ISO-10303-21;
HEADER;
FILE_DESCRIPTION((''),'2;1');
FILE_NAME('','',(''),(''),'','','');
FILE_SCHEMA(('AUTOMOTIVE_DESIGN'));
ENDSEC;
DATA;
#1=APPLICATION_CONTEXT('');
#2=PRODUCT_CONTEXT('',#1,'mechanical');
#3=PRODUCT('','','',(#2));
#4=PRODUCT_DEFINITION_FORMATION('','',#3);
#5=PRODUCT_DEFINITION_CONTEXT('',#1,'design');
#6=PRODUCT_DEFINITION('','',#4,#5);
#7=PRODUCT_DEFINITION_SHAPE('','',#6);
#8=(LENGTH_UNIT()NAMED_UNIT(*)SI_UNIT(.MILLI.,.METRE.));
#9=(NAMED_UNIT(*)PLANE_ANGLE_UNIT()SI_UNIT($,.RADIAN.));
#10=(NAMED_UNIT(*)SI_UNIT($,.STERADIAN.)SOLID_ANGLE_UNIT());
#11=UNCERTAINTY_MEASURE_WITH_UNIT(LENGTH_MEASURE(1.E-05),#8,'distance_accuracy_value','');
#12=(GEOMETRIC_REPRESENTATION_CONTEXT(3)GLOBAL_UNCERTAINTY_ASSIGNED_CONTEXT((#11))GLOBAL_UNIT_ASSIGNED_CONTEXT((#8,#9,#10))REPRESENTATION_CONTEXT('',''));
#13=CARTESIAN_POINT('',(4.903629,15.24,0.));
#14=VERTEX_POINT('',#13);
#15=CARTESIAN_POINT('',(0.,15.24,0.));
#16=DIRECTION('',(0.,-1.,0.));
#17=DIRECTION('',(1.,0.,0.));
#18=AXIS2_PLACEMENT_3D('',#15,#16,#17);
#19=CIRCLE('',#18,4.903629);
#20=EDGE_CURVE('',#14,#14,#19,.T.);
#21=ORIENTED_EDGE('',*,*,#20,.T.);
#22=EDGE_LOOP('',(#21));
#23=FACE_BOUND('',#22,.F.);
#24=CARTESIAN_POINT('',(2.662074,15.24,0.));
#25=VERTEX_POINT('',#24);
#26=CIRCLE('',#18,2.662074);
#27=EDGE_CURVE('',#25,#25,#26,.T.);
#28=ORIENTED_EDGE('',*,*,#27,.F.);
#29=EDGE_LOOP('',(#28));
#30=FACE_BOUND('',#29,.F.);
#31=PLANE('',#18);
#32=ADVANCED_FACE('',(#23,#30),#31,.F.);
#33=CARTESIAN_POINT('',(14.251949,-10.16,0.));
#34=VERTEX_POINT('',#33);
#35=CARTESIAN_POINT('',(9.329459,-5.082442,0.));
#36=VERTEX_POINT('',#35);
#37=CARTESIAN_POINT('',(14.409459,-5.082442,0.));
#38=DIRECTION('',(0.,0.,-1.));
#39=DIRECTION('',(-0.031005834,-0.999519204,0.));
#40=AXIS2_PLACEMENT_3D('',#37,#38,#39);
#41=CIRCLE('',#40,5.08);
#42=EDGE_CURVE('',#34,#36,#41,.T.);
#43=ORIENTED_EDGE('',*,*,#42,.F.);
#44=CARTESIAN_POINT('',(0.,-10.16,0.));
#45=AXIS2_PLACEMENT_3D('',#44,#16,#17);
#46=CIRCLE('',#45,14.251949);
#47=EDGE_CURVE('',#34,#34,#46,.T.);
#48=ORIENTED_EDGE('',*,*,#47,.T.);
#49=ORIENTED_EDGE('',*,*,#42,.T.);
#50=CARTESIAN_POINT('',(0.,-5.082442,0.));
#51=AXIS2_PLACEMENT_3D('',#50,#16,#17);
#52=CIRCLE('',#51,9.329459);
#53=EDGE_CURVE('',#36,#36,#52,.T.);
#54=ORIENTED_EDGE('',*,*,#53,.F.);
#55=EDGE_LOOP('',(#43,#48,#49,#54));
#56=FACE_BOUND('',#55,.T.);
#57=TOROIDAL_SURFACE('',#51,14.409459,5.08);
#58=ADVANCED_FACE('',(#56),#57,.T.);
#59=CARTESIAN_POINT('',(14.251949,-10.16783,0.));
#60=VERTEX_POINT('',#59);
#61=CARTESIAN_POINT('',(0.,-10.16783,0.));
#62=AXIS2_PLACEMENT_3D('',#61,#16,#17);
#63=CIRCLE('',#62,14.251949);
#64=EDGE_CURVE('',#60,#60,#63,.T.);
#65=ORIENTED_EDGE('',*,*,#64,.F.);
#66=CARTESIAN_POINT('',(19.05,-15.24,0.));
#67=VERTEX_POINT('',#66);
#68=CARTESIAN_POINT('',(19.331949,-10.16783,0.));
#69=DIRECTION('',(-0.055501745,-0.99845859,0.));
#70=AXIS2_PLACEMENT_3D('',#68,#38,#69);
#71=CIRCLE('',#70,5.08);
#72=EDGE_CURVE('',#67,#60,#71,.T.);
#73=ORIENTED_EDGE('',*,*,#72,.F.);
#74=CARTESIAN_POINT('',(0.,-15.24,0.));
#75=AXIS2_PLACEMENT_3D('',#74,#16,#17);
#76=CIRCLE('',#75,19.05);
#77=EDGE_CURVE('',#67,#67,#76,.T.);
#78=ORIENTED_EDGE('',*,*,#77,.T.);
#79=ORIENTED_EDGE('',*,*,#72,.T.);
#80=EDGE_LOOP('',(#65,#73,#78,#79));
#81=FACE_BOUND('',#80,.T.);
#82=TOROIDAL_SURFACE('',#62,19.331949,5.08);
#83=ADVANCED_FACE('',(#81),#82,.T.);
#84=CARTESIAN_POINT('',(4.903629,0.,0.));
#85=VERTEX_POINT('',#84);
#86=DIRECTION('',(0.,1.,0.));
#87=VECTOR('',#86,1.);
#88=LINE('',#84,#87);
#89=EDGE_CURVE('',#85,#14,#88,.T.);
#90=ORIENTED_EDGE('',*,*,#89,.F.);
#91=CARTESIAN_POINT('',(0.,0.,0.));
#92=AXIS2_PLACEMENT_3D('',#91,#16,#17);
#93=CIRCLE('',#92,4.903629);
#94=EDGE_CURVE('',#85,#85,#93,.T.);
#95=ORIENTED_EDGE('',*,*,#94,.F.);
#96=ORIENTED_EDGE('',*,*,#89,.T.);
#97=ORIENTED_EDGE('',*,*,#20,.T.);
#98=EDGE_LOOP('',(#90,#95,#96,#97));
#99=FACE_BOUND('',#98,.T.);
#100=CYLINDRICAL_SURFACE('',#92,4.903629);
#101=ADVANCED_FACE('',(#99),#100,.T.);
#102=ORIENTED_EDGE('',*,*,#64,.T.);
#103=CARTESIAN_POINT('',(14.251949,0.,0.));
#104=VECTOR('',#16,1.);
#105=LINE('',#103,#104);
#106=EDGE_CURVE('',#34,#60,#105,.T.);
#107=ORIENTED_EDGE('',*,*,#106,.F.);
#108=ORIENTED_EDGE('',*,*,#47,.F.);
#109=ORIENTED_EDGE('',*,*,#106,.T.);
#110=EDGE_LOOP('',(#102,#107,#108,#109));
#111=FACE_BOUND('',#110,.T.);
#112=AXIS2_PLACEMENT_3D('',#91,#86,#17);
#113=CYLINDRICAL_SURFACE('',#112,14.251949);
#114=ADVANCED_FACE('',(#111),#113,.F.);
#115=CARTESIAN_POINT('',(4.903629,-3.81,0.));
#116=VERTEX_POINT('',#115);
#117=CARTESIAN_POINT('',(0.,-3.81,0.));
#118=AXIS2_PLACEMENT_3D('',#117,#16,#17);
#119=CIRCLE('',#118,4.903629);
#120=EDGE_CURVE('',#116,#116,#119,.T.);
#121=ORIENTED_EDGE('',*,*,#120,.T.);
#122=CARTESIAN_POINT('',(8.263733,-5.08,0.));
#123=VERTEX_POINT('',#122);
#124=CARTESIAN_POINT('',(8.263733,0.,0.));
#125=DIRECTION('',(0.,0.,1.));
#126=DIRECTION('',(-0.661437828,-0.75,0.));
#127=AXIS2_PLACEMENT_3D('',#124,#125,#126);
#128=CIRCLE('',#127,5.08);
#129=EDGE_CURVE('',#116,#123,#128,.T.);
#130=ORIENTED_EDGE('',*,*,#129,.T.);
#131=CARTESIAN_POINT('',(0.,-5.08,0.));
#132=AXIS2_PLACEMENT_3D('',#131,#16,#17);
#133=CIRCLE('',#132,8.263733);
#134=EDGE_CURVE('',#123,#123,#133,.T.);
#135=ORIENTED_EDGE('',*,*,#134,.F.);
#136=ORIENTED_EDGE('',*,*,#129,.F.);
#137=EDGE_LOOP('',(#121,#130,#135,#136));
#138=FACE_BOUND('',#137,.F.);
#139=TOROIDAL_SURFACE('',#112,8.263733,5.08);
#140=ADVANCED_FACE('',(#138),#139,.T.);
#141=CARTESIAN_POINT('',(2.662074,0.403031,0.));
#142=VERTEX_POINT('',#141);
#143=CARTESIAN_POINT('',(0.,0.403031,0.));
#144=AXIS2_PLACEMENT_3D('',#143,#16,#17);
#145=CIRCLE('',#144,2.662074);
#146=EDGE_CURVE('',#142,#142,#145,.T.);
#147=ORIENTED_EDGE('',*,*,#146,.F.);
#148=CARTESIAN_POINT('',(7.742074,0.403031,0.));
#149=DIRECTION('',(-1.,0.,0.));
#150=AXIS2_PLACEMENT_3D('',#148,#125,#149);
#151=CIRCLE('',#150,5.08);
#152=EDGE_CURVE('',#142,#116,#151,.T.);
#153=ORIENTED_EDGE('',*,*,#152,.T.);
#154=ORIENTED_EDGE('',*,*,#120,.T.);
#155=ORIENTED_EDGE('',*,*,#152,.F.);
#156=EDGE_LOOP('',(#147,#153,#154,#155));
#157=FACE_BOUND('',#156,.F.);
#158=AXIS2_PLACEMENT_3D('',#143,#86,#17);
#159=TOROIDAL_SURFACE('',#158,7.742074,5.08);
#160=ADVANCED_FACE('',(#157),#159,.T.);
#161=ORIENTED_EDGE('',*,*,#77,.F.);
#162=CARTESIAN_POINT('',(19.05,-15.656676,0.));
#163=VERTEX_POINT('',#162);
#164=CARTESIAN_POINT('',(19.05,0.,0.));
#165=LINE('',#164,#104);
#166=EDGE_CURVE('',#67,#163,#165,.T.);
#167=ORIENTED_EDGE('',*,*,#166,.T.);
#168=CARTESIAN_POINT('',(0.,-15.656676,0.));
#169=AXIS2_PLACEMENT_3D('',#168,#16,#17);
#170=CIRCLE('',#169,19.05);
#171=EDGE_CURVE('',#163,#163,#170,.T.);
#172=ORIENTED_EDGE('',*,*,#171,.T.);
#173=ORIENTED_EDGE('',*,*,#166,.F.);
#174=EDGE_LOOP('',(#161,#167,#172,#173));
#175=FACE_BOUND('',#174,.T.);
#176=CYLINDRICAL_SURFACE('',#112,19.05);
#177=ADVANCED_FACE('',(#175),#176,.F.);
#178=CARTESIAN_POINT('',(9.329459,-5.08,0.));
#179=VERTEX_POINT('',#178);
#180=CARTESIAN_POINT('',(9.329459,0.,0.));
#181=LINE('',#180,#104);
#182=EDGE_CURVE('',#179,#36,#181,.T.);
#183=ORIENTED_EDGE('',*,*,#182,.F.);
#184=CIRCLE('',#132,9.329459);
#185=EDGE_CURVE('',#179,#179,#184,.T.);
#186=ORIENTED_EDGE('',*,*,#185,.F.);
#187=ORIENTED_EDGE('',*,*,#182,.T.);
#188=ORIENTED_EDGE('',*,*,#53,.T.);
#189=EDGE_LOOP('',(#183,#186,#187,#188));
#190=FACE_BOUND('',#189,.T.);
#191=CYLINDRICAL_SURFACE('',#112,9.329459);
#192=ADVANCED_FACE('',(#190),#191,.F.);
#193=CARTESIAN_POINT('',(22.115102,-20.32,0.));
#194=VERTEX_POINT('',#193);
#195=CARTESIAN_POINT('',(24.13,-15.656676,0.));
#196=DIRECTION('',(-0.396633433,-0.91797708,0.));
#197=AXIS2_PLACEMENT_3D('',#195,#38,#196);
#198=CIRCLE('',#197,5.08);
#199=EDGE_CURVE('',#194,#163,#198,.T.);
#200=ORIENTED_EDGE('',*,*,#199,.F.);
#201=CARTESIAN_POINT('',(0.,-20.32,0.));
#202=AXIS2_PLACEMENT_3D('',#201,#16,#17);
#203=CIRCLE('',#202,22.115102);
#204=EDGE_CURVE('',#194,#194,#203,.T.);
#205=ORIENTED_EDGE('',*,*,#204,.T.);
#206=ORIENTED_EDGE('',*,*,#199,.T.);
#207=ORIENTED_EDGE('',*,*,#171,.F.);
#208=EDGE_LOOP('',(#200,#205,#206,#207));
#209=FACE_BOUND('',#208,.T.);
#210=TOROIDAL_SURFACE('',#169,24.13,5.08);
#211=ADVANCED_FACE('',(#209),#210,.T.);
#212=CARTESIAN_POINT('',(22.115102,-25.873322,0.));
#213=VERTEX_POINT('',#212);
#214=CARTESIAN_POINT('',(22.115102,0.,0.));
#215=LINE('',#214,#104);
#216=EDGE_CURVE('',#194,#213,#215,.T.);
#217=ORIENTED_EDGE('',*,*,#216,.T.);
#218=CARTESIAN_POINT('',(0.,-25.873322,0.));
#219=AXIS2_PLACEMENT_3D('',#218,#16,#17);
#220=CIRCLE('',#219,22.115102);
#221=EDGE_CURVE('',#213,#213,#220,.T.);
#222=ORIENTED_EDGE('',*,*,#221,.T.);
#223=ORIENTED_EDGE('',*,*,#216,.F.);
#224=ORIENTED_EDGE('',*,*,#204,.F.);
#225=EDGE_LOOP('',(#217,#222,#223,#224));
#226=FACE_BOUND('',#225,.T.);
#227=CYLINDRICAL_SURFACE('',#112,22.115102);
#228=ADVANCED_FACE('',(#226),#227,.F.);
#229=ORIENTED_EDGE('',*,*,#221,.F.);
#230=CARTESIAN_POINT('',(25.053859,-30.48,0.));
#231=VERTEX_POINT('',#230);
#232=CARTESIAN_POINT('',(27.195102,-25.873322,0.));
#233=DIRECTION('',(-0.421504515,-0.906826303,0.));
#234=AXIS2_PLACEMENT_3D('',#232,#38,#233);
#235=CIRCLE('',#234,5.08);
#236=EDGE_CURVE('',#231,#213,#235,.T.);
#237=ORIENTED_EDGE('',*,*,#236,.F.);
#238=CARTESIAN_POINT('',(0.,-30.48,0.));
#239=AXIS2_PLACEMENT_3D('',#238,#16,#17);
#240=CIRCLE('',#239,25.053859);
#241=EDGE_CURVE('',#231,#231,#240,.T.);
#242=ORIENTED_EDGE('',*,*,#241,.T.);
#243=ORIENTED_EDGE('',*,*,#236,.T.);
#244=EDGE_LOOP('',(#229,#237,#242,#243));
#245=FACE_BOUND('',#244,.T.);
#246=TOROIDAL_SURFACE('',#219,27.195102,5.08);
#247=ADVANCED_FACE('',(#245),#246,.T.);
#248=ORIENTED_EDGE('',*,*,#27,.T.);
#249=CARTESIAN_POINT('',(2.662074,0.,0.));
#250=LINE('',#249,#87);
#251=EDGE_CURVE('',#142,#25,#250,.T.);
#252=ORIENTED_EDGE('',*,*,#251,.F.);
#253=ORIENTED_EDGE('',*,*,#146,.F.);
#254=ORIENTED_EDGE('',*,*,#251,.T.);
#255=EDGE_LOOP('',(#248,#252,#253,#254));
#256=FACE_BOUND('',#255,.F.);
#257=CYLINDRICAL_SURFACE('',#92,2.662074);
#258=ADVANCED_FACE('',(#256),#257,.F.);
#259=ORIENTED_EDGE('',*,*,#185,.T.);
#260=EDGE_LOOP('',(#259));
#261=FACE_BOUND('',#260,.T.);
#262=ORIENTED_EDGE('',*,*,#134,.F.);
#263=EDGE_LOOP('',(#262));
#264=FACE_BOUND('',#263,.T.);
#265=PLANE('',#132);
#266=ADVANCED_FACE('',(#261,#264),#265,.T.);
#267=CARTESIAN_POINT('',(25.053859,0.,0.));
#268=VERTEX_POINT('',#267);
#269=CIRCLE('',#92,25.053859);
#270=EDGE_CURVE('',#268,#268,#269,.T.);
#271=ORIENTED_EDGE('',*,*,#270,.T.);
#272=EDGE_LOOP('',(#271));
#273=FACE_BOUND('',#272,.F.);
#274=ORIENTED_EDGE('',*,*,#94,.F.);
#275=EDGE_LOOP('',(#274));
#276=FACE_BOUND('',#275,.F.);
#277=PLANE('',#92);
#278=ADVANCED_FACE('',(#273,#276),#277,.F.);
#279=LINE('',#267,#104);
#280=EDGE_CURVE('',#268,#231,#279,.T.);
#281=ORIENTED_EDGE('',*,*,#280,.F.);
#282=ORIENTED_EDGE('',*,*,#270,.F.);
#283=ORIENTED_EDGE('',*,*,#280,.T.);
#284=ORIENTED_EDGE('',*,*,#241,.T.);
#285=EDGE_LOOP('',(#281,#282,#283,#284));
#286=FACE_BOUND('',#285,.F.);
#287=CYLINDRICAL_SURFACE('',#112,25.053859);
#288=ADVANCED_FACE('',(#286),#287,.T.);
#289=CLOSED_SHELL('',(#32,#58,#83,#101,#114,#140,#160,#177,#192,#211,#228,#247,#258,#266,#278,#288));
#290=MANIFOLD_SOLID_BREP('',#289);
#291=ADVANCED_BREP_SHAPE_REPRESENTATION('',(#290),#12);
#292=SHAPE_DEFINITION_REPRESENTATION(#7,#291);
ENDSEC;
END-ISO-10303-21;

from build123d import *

# Parameters (mm, degrees)
F0_R     = 25.0538592269
F0_R_2   = 22.1151021615
F1_DEPTH = 30.48
F0_R_3   = 19.05
F2_DEPTH = 20.32
F0_R_4   = 14.2519488642
F3_DEPTH = 15.24
F0_R_5   = 9.329458502
F4_DEPTH = 10.16
F0_R_6   = 4.9036289707
F5_DEPTH = 5.08
F0_R_7   = 2.6620736833
F6_DEPTH = 3.81
F7_DEPTH = 15.24


# Not quite as in the source:
# - a fillet or chamfer that OpenCascade refuses, or shapes differently, is made with other operations: its cross-section is extruded or revolved along the edge and cut away or added


with BuildPart() as f1:
    # F0 (on Front) → F1 (new body)
    with BuildSketch(Plane.XZ):
        Circle(F0_R)
        Circle(F0_R_2, mode=Mode.SUBTRACT)
    extrude(amount=F1_DEPTH)

    # F0 (on Front) → F2 (join)
    with BuildSketch(Plane.XZ):
        Circle(F0_R_2)
        Circle(F0_R_3, mode=Mode.SUBTRACT)
    extrude(amount=F2_DEPTH)

    # F0 (on Front) → F3 (join)
    with BuildSketch(Plane.XZ):
        Circle(F0_R_3)
        Circle(F0_R_4, mode=Mode.SUBTRACT)
    extrude(amount=F3_DEPTH)

    # F0 (on Front) → F4 (join)
    with BuildSketch(Plane.XZ):
        Circle(F0_R_4)
        Circle(F0_R_5, mode=Mode.SUBTRACT)
    extrude(amount=F4_DEPTH)

    # F0 (on Front) → F5 (join)
    with BuildSketch(Plane.XZ):
        Circle(F0_R_5)
        Circle(F0_R_6, mode=Mode.SUBTRACT)
    extrude(amount=F5_DEPTH)

    # F0 (on Front) → F6 (join)
    with BuildSketch(Plane.XZ):
        Circle(F0_R_6)
        Circle(F0_R_7, mode=Mode.SUBTRACT)
    extrude(amount=F6_DEPTH)

    # F0 (on Front) → F7 (join)
    with BuildSketch(Plane.XZ):
        Circle(F0_R_6)
        Circle(F0_R_7, mode=Mode.SUBTRACT)
    extrude(amount=-F7_DEPTH)

    # F8: fillet of radius 5.08 on 6 edges, made by hand

    # F8_s1 → F8_t2 (revolve, cut)
    with BuildSketch(Plane.XY):
        with BuildLine():
            ThreePointArc((25.0538592269, -30.48), (22.9123510534, -28.6054356547), (22.1151021615, -25.87332238))
            Line((22.1151021615, -25.87332238), (22.1151021615, -30.48))
            Line((22.1151021615, -30.48), (25.0538592269, -30.48))
        make_face()
    revolve(axis=Axis((0, -30.48, 0), (0, -1, 0)), mode=Mode.SUBTRACT)

    # F8_s3 → F8_t4 (revolve, cut)
    with BuildSketch(Plane.XY):
        with BuildLine():
            ThreePointArc((22.1151021615, -20.32), (19.8848803892, -18.4469021379), (19.05, -15.6566764319))
            Line((19.05, -15.6566764319), (19.05, -20.32))
            Line((19.05, -20.32), (22.1151021615, -20.32))
        make_face()
    revolve(axis=Axis((0, -20.32, 0), (0, -1, 0)), mode=Mode.SUBTRACT)

    # F8_s5 → F8_t6 (revolve, cut)
    with BuildSketch(Plane.XY):
        with BuildLine():
            ThreePointArc((19.05, -15.24), (15.6415084955, -13.6588259054), (14.2519488642, -10.1678303619))
            Line((14.2519488642, -10.1678303619), (14.2519488642, -15.24))
            Line((14.2519488642, -15.24), (19.05, -15.24))
        make_face()
    revolve(axis=Axis((0, -15.24, 0), (0, -1, 0)), mode=Mode.SUBTRACT)

    # F8_s7 → F8_t8 (revolve, cut)
    with BuildSketch(Plane.XY):
        with BuildLine():
            ThreePointArc((14.2519488642, -10.16), (10.7620930857, -8.6184183396), (9.329458502, -5.082442446))
            Line((9.329458502, -5.082442446), (9.329458502, -10.16))
            Line((9.329458502, -10.16), (14.2519488642, -10.16))
        make_face()
    revolve(axis=Axis((0, -10.16, 0), (0, -1, 0)), mode=Mode.SUBTRACT)

    # F8_s9 → F8_t10 (revolve, cut)
    with BuildSketch(Plane.XY):
        with BuildLine():
            ThreePointArc((4.9036289707, -3.81), (6.4676819116, -4.7519048812), (8.2637331358, -5.08))
            Line((8.2637331358, -5.08), (4.9036289707, -5.08))
            Line((4.9036289707, -5.08), (4.9036289707, -3.81))
        make_face()
    revolve(axis=Axis((0, -5.08, 0), (0, -1, 0)), mode=Mode.SUBTRACT)

    # F8_s11 → F8_t12 (revolve, cut)
    with BuildSketch(Plane.XY):
        with BuildLine():
            ThreePointArc((2.6620736833, 0.4030311669), (3.2573385105, -1.9830850142), (4.9036289707, -3.81))
            Line((4.9036289707, -3.81), (2.6620736833, -3.81))
            Line((2.6620736833, -3.81), (2.6620736833, 0.4030311669))
        make_face()
    revolve(axis=Axis((0, -3.81, 0), (0, -1, 0)), mode=Mode.SUBTRACT)


solid = f1.part
